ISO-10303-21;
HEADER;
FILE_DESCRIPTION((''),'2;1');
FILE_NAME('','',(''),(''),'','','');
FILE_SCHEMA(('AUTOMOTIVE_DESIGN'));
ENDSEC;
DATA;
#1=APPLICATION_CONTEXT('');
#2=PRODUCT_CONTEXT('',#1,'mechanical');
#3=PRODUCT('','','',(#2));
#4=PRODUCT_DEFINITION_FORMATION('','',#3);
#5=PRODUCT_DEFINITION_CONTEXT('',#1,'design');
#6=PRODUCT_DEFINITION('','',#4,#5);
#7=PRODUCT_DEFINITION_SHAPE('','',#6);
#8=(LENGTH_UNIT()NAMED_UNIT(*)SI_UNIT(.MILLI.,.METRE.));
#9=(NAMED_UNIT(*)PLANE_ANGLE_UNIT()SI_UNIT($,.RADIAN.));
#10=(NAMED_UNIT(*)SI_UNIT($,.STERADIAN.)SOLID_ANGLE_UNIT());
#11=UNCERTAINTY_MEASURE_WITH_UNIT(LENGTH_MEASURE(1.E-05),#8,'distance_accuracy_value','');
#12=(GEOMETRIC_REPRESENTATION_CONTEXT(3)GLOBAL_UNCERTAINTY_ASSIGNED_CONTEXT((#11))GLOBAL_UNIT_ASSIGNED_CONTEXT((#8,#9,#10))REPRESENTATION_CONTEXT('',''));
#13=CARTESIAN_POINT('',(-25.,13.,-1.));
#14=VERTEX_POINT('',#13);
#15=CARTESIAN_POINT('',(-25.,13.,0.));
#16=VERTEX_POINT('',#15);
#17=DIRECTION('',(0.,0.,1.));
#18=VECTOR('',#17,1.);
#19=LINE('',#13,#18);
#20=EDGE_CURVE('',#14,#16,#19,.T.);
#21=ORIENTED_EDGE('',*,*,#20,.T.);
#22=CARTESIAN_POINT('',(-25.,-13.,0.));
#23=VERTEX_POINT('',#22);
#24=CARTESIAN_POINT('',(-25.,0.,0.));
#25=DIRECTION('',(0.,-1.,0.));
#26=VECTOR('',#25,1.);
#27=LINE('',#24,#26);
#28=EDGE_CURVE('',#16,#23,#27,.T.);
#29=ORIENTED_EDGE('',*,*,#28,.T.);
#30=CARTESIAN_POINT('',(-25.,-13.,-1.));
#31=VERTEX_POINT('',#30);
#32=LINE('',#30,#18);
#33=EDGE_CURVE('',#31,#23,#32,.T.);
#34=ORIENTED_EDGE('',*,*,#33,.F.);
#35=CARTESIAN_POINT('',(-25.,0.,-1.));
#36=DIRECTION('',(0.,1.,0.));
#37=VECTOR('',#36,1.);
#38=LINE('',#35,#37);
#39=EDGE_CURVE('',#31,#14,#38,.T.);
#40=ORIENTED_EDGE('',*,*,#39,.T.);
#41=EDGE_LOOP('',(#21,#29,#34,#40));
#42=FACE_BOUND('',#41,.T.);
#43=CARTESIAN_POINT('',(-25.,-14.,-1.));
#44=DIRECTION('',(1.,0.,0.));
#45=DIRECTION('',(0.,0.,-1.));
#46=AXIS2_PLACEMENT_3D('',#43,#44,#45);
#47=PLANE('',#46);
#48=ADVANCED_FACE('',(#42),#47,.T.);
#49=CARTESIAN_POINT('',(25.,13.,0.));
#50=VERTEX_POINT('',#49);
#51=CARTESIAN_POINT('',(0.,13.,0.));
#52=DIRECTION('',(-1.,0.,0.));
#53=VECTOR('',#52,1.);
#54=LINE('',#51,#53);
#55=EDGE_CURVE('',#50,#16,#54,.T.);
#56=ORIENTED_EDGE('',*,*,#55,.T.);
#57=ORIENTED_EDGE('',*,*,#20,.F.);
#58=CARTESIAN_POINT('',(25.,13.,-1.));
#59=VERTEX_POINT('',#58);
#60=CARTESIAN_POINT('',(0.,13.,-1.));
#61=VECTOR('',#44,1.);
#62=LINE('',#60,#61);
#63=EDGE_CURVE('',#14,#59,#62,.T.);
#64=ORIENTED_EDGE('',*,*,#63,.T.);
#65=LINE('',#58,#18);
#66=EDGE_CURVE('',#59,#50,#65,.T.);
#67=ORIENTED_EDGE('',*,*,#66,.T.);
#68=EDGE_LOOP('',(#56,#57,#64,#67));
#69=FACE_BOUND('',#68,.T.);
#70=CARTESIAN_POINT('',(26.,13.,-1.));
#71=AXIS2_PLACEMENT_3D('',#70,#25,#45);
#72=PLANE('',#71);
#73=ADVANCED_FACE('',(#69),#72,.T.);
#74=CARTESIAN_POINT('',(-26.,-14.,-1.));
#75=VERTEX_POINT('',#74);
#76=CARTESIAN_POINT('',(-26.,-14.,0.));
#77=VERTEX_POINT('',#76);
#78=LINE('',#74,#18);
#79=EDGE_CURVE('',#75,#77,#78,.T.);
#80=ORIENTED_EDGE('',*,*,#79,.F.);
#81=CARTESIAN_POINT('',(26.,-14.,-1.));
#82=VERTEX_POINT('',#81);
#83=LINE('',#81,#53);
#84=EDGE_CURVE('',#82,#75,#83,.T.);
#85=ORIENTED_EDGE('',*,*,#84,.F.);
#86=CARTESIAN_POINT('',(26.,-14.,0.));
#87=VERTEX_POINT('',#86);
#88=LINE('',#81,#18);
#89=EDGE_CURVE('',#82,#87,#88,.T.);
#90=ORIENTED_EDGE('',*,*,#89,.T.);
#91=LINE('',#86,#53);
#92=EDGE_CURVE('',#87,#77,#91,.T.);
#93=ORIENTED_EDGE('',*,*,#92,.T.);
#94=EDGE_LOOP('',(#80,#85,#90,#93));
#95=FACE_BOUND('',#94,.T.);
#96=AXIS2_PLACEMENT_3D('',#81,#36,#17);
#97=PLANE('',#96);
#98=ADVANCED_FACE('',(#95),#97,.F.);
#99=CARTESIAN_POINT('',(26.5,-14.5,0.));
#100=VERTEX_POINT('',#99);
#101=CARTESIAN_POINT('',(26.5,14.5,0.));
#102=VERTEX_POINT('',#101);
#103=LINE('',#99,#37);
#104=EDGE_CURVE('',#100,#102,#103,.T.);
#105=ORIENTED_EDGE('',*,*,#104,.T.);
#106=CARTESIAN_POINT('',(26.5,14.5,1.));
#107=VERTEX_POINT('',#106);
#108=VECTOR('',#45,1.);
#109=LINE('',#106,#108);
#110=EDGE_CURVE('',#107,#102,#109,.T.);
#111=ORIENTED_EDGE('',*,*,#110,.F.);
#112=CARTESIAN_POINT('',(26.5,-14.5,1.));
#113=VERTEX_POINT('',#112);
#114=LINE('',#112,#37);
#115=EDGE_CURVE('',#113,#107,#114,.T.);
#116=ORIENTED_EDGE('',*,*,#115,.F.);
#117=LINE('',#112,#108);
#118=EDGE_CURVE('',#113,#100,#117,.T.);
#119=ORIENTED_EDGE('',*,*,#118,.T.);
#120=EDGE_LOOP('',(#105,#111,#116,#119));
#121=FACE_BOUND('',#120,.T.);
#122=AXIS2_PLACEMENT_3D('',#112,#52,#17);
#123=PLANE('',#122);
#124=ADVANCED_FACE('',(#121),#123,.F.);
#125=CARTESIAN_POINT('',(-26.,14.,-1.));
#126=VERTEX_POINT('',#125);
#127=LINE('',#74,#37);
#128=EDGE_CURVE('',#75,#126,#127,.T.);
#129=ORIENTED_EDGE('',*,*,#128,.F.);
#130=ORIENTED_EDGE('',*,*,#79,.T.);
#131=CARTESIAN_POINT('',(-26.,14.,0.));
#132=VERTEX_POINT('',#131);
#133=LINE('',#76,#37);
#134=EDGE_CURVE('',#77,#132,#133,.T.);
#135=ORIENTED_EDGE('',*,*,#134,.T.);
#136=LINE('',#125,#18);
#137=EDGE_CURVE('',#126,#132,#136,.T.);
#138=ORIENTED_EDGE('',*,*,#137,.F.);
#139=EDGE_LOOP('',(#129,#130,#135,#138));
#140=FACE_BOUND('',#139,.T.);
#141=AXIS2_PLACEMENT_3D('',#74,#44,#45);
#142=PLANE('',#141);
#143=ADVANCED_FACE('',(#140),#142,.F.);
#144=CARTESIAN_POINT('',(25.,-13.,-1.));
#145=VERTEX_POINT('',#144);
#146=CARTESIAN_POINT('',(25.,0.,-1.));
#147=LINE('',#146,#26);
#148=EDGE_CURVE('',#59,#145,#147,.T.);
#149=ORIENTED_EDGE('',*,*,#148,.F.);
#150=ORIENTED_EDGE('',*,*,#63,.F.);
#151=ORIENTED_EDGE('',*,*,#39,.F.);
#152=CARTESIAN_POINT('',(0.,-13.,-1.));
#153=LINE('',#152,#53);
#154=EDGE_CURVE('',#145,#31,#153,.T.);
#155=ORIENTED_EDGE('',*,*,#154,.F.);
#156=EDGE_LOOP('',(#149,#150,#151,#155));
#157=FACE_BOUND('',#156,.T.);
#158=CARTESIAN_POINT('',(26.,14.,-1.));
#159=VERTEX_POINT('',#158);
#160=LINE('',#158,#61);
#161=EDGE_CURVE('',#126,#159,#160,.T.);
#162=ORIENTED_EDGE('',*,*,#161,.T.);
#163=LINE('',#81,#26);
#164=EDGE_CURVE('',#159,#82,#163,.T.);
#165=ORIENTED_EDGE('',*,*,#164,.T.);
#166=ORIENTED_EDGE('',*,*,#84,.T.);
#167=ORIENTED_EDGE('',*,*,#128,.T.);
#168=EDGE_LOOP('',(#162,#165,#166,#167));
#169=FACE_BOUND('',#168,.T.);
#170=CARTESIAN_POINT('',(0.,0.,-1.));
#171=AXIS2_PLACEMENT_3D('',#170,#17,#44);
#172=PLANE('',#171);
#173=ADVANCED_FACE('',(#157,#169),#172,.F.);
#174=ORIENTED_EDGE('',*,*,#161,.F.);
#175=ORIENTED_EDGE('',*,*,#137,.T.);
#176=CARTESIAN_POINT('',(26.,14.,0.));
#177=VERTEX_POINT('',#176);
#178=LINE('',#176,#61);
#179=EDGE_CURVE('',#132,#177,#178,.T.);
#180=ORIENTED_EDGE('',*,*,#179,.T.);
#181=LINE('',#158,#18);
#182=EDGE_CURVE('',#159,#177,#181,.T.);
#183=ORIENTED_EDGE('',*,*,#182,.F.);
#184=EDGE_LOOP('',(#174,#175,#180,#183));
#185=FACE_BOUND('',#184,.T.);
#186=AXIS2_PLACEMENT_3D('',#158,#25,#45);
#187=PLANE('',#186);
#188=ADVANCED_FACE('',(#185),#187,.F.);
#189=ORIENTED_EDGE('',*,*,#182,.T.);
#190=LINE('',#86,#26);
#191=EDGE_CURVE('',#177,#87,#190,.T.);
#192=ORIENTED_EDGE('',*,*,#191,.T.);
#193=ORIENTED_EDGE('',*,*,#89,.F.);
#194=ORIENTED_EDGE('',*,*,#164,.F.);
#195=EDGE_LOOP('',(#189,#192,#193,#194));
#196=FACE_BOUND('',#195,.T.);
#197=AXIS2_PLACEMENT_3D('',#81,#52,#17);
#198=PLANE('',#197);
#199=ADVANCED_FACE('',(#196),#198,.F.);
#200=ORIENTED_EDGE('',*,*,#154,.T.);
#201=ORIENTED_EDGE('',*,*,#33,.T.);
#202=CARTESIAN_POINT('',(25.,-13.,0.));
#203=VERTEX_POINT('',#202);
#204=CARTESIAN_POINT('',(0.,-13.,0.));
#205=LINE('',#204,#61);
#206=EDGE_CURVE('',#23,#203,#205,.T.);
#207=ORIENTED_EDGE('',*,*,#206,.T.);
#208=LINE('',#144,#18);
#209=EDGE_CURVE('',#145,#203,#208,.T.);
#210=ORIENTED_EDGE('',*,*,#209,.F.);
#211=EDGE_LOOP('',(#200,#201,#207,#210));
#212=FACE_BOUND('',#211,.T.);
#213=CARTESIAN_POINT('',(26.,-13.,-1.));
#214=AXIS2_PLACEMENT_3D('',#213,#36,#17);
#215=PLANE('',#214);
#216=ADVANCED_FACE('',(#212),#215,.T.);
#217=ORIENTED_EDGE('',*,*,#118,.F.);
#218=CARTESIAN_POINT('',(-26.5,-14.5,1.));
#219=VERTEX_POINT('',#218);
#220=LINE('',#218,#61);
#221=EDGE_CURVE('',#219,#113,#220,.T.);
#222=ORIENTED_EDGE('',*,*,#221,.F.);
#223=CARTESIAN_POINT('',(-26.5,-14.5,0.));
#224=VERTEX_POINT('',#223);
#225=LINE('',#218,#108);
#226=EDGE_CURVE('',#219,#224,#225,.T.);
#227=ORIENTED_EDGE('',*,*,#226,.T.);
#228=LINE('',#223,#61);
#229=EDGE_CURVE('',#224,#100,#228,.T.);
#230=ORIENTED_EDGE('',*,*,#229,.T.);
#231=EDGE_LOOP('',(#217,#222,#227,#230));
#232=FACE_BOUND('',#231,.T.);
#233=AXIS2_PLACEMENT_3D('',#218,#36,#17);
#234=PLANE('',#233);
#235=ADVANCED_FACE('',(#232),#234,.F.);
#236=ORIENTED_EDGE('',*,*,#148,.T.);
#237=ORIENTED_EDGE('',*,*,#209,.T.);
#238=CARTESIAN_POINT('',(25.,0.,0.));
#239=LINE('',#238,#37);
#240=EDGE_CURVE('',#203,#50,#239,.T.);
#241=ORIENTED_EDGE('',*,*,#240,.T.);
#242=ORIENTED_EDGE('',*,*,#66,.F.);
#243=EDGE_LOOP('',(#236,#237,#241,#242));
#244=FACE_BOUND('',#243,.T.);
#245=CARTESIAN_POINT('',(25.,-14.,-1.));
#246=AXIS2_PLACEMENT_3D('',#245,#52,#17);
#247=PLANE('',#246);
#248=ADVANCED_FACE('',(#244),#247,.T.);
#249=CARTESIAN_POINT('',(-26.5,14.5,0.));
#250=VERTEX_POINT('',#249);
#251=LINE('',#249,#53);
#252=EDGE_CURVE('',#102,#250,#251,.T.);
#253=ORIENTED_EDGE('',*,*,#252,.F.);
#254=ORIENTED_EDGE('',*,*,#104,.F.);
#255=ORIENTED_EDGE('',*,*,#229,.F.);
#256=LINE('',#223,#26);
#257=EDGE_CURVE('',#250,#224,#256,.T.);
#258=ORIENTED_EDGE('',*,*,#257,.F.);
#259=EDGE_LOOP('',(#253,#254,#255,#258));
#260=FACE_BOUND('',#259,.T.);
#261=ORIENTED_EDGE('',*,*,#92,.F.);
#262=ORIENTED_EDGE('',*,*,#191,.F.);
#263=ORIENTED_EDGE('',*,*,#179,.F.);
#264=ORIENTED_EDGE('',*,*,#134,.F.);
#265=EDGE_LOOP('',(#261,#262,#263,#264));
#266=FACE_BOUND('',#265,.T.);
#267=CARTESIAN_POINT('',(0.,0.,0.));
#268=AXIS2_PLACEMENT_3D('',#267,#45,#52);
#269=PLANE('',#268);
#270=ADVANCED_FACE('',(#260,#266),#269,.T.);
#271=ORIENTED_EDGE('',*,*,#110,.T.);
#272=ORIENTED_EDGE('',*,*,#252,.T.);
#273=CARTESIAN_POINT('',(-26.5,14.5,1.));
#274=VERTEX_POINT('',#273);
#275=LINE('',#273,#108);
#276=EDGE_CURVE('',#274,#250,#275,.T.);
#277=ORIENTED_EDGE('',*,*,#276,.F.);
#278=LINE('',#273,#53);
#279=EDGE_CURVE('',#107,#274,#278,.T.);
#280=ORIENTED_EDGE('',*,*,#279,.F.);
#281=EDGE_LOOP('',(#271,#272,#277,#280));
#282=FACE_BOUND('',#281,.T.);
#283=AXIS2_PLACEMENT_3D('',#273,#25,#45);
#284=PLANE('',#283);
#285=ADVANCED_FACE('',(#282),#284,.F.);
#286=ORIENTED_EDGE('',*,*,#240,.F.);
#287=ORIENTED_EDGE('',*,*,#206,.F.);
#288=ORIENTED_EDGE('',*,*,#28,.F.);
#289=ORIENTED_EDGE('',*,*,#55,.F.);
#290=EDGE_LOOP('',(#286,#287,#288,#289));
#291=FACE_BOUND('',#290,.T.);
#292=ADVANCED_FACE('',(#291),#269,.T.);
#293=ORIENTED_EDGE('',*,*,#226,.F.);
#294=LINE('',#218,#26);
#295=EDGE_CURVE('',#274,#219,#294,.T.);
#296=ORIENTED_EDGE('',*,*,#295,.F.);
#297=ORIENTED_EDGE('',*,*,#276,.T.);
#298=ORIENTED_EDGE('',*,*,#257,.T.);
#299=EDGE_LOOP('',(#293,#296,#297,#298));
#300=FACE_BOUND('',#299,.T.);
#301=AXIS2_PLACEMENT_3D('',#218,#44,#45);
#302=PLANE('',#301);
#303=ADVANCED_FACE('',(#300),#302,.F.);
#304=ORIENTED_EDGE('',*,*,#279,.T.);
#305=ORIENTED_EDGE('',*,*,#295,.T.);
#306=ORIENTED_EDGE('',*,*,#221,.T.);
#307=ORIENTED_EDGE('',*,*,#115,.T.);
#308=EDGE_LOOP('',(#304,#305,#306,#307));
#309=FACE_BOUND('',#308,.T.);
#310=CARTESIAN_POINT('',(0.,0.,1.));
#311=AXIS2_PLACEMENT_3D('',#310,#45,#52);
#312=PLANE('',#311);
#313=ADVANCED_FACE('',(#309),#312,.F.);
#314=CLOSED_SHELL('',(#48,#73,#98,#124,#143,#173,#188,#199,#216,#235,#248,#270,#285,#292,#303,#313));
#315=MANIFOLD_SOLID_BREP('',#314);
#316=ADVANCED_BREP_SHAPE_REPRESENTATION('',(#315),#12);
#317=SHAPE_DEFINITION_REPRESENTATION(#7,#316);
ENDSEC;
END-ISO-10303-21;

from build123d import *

# Parameters (mm, degrees)
SKETCH1_W           = 53
SKETCH1_H           = 29
BOSS_EXTRUDE1_DEPTH = 1
SKETCH2_W           = 52
SKETCH2_H           = 28
BOSS_EXTRUDE2_DEPTH = 1
SHELL1_START        = -1
SHELL1_OUTLINE_W    = 50
SHELL1_OUTLINE_H    = 26
SHELL1_DEPTH        = 1


# Read off the part's stored shape, not the designer's step: Shell1
with BuildPart() as part:
    # Sketch1 → Boss-Extrude1 (new body)
    with BuildSketch(Plane.XY):
        Rectangle(SKETCH1_W, SKETCH1_H)
    extrude(amount=BOSS_EXTRUDE1_DEPTH)

    # Sketch2 → Boss-Extrude2 (add)
    with BuildSketch(Plane(origin=(0, 0, 0), x_dir=(-1, 0, 0), z_dir=(0, 0, -1))):
        Rectangle(SKETCH2_W, SKETCH2_H)
    extrude(amount=BOSS_EXTRUDE2_DEPTH)

    # Shell1 outline → Shell1 (cut)
    with BuildSketch(Plane.XY.offset(SHELL1_START)):
        Rectangle(SHELL1_OUTLINE_W, SHELL1_OUTLINE_H)
    extrude(amount=SHELL1_DEPTH, mode=Mode.SUBTRACT)


solid = part.part
